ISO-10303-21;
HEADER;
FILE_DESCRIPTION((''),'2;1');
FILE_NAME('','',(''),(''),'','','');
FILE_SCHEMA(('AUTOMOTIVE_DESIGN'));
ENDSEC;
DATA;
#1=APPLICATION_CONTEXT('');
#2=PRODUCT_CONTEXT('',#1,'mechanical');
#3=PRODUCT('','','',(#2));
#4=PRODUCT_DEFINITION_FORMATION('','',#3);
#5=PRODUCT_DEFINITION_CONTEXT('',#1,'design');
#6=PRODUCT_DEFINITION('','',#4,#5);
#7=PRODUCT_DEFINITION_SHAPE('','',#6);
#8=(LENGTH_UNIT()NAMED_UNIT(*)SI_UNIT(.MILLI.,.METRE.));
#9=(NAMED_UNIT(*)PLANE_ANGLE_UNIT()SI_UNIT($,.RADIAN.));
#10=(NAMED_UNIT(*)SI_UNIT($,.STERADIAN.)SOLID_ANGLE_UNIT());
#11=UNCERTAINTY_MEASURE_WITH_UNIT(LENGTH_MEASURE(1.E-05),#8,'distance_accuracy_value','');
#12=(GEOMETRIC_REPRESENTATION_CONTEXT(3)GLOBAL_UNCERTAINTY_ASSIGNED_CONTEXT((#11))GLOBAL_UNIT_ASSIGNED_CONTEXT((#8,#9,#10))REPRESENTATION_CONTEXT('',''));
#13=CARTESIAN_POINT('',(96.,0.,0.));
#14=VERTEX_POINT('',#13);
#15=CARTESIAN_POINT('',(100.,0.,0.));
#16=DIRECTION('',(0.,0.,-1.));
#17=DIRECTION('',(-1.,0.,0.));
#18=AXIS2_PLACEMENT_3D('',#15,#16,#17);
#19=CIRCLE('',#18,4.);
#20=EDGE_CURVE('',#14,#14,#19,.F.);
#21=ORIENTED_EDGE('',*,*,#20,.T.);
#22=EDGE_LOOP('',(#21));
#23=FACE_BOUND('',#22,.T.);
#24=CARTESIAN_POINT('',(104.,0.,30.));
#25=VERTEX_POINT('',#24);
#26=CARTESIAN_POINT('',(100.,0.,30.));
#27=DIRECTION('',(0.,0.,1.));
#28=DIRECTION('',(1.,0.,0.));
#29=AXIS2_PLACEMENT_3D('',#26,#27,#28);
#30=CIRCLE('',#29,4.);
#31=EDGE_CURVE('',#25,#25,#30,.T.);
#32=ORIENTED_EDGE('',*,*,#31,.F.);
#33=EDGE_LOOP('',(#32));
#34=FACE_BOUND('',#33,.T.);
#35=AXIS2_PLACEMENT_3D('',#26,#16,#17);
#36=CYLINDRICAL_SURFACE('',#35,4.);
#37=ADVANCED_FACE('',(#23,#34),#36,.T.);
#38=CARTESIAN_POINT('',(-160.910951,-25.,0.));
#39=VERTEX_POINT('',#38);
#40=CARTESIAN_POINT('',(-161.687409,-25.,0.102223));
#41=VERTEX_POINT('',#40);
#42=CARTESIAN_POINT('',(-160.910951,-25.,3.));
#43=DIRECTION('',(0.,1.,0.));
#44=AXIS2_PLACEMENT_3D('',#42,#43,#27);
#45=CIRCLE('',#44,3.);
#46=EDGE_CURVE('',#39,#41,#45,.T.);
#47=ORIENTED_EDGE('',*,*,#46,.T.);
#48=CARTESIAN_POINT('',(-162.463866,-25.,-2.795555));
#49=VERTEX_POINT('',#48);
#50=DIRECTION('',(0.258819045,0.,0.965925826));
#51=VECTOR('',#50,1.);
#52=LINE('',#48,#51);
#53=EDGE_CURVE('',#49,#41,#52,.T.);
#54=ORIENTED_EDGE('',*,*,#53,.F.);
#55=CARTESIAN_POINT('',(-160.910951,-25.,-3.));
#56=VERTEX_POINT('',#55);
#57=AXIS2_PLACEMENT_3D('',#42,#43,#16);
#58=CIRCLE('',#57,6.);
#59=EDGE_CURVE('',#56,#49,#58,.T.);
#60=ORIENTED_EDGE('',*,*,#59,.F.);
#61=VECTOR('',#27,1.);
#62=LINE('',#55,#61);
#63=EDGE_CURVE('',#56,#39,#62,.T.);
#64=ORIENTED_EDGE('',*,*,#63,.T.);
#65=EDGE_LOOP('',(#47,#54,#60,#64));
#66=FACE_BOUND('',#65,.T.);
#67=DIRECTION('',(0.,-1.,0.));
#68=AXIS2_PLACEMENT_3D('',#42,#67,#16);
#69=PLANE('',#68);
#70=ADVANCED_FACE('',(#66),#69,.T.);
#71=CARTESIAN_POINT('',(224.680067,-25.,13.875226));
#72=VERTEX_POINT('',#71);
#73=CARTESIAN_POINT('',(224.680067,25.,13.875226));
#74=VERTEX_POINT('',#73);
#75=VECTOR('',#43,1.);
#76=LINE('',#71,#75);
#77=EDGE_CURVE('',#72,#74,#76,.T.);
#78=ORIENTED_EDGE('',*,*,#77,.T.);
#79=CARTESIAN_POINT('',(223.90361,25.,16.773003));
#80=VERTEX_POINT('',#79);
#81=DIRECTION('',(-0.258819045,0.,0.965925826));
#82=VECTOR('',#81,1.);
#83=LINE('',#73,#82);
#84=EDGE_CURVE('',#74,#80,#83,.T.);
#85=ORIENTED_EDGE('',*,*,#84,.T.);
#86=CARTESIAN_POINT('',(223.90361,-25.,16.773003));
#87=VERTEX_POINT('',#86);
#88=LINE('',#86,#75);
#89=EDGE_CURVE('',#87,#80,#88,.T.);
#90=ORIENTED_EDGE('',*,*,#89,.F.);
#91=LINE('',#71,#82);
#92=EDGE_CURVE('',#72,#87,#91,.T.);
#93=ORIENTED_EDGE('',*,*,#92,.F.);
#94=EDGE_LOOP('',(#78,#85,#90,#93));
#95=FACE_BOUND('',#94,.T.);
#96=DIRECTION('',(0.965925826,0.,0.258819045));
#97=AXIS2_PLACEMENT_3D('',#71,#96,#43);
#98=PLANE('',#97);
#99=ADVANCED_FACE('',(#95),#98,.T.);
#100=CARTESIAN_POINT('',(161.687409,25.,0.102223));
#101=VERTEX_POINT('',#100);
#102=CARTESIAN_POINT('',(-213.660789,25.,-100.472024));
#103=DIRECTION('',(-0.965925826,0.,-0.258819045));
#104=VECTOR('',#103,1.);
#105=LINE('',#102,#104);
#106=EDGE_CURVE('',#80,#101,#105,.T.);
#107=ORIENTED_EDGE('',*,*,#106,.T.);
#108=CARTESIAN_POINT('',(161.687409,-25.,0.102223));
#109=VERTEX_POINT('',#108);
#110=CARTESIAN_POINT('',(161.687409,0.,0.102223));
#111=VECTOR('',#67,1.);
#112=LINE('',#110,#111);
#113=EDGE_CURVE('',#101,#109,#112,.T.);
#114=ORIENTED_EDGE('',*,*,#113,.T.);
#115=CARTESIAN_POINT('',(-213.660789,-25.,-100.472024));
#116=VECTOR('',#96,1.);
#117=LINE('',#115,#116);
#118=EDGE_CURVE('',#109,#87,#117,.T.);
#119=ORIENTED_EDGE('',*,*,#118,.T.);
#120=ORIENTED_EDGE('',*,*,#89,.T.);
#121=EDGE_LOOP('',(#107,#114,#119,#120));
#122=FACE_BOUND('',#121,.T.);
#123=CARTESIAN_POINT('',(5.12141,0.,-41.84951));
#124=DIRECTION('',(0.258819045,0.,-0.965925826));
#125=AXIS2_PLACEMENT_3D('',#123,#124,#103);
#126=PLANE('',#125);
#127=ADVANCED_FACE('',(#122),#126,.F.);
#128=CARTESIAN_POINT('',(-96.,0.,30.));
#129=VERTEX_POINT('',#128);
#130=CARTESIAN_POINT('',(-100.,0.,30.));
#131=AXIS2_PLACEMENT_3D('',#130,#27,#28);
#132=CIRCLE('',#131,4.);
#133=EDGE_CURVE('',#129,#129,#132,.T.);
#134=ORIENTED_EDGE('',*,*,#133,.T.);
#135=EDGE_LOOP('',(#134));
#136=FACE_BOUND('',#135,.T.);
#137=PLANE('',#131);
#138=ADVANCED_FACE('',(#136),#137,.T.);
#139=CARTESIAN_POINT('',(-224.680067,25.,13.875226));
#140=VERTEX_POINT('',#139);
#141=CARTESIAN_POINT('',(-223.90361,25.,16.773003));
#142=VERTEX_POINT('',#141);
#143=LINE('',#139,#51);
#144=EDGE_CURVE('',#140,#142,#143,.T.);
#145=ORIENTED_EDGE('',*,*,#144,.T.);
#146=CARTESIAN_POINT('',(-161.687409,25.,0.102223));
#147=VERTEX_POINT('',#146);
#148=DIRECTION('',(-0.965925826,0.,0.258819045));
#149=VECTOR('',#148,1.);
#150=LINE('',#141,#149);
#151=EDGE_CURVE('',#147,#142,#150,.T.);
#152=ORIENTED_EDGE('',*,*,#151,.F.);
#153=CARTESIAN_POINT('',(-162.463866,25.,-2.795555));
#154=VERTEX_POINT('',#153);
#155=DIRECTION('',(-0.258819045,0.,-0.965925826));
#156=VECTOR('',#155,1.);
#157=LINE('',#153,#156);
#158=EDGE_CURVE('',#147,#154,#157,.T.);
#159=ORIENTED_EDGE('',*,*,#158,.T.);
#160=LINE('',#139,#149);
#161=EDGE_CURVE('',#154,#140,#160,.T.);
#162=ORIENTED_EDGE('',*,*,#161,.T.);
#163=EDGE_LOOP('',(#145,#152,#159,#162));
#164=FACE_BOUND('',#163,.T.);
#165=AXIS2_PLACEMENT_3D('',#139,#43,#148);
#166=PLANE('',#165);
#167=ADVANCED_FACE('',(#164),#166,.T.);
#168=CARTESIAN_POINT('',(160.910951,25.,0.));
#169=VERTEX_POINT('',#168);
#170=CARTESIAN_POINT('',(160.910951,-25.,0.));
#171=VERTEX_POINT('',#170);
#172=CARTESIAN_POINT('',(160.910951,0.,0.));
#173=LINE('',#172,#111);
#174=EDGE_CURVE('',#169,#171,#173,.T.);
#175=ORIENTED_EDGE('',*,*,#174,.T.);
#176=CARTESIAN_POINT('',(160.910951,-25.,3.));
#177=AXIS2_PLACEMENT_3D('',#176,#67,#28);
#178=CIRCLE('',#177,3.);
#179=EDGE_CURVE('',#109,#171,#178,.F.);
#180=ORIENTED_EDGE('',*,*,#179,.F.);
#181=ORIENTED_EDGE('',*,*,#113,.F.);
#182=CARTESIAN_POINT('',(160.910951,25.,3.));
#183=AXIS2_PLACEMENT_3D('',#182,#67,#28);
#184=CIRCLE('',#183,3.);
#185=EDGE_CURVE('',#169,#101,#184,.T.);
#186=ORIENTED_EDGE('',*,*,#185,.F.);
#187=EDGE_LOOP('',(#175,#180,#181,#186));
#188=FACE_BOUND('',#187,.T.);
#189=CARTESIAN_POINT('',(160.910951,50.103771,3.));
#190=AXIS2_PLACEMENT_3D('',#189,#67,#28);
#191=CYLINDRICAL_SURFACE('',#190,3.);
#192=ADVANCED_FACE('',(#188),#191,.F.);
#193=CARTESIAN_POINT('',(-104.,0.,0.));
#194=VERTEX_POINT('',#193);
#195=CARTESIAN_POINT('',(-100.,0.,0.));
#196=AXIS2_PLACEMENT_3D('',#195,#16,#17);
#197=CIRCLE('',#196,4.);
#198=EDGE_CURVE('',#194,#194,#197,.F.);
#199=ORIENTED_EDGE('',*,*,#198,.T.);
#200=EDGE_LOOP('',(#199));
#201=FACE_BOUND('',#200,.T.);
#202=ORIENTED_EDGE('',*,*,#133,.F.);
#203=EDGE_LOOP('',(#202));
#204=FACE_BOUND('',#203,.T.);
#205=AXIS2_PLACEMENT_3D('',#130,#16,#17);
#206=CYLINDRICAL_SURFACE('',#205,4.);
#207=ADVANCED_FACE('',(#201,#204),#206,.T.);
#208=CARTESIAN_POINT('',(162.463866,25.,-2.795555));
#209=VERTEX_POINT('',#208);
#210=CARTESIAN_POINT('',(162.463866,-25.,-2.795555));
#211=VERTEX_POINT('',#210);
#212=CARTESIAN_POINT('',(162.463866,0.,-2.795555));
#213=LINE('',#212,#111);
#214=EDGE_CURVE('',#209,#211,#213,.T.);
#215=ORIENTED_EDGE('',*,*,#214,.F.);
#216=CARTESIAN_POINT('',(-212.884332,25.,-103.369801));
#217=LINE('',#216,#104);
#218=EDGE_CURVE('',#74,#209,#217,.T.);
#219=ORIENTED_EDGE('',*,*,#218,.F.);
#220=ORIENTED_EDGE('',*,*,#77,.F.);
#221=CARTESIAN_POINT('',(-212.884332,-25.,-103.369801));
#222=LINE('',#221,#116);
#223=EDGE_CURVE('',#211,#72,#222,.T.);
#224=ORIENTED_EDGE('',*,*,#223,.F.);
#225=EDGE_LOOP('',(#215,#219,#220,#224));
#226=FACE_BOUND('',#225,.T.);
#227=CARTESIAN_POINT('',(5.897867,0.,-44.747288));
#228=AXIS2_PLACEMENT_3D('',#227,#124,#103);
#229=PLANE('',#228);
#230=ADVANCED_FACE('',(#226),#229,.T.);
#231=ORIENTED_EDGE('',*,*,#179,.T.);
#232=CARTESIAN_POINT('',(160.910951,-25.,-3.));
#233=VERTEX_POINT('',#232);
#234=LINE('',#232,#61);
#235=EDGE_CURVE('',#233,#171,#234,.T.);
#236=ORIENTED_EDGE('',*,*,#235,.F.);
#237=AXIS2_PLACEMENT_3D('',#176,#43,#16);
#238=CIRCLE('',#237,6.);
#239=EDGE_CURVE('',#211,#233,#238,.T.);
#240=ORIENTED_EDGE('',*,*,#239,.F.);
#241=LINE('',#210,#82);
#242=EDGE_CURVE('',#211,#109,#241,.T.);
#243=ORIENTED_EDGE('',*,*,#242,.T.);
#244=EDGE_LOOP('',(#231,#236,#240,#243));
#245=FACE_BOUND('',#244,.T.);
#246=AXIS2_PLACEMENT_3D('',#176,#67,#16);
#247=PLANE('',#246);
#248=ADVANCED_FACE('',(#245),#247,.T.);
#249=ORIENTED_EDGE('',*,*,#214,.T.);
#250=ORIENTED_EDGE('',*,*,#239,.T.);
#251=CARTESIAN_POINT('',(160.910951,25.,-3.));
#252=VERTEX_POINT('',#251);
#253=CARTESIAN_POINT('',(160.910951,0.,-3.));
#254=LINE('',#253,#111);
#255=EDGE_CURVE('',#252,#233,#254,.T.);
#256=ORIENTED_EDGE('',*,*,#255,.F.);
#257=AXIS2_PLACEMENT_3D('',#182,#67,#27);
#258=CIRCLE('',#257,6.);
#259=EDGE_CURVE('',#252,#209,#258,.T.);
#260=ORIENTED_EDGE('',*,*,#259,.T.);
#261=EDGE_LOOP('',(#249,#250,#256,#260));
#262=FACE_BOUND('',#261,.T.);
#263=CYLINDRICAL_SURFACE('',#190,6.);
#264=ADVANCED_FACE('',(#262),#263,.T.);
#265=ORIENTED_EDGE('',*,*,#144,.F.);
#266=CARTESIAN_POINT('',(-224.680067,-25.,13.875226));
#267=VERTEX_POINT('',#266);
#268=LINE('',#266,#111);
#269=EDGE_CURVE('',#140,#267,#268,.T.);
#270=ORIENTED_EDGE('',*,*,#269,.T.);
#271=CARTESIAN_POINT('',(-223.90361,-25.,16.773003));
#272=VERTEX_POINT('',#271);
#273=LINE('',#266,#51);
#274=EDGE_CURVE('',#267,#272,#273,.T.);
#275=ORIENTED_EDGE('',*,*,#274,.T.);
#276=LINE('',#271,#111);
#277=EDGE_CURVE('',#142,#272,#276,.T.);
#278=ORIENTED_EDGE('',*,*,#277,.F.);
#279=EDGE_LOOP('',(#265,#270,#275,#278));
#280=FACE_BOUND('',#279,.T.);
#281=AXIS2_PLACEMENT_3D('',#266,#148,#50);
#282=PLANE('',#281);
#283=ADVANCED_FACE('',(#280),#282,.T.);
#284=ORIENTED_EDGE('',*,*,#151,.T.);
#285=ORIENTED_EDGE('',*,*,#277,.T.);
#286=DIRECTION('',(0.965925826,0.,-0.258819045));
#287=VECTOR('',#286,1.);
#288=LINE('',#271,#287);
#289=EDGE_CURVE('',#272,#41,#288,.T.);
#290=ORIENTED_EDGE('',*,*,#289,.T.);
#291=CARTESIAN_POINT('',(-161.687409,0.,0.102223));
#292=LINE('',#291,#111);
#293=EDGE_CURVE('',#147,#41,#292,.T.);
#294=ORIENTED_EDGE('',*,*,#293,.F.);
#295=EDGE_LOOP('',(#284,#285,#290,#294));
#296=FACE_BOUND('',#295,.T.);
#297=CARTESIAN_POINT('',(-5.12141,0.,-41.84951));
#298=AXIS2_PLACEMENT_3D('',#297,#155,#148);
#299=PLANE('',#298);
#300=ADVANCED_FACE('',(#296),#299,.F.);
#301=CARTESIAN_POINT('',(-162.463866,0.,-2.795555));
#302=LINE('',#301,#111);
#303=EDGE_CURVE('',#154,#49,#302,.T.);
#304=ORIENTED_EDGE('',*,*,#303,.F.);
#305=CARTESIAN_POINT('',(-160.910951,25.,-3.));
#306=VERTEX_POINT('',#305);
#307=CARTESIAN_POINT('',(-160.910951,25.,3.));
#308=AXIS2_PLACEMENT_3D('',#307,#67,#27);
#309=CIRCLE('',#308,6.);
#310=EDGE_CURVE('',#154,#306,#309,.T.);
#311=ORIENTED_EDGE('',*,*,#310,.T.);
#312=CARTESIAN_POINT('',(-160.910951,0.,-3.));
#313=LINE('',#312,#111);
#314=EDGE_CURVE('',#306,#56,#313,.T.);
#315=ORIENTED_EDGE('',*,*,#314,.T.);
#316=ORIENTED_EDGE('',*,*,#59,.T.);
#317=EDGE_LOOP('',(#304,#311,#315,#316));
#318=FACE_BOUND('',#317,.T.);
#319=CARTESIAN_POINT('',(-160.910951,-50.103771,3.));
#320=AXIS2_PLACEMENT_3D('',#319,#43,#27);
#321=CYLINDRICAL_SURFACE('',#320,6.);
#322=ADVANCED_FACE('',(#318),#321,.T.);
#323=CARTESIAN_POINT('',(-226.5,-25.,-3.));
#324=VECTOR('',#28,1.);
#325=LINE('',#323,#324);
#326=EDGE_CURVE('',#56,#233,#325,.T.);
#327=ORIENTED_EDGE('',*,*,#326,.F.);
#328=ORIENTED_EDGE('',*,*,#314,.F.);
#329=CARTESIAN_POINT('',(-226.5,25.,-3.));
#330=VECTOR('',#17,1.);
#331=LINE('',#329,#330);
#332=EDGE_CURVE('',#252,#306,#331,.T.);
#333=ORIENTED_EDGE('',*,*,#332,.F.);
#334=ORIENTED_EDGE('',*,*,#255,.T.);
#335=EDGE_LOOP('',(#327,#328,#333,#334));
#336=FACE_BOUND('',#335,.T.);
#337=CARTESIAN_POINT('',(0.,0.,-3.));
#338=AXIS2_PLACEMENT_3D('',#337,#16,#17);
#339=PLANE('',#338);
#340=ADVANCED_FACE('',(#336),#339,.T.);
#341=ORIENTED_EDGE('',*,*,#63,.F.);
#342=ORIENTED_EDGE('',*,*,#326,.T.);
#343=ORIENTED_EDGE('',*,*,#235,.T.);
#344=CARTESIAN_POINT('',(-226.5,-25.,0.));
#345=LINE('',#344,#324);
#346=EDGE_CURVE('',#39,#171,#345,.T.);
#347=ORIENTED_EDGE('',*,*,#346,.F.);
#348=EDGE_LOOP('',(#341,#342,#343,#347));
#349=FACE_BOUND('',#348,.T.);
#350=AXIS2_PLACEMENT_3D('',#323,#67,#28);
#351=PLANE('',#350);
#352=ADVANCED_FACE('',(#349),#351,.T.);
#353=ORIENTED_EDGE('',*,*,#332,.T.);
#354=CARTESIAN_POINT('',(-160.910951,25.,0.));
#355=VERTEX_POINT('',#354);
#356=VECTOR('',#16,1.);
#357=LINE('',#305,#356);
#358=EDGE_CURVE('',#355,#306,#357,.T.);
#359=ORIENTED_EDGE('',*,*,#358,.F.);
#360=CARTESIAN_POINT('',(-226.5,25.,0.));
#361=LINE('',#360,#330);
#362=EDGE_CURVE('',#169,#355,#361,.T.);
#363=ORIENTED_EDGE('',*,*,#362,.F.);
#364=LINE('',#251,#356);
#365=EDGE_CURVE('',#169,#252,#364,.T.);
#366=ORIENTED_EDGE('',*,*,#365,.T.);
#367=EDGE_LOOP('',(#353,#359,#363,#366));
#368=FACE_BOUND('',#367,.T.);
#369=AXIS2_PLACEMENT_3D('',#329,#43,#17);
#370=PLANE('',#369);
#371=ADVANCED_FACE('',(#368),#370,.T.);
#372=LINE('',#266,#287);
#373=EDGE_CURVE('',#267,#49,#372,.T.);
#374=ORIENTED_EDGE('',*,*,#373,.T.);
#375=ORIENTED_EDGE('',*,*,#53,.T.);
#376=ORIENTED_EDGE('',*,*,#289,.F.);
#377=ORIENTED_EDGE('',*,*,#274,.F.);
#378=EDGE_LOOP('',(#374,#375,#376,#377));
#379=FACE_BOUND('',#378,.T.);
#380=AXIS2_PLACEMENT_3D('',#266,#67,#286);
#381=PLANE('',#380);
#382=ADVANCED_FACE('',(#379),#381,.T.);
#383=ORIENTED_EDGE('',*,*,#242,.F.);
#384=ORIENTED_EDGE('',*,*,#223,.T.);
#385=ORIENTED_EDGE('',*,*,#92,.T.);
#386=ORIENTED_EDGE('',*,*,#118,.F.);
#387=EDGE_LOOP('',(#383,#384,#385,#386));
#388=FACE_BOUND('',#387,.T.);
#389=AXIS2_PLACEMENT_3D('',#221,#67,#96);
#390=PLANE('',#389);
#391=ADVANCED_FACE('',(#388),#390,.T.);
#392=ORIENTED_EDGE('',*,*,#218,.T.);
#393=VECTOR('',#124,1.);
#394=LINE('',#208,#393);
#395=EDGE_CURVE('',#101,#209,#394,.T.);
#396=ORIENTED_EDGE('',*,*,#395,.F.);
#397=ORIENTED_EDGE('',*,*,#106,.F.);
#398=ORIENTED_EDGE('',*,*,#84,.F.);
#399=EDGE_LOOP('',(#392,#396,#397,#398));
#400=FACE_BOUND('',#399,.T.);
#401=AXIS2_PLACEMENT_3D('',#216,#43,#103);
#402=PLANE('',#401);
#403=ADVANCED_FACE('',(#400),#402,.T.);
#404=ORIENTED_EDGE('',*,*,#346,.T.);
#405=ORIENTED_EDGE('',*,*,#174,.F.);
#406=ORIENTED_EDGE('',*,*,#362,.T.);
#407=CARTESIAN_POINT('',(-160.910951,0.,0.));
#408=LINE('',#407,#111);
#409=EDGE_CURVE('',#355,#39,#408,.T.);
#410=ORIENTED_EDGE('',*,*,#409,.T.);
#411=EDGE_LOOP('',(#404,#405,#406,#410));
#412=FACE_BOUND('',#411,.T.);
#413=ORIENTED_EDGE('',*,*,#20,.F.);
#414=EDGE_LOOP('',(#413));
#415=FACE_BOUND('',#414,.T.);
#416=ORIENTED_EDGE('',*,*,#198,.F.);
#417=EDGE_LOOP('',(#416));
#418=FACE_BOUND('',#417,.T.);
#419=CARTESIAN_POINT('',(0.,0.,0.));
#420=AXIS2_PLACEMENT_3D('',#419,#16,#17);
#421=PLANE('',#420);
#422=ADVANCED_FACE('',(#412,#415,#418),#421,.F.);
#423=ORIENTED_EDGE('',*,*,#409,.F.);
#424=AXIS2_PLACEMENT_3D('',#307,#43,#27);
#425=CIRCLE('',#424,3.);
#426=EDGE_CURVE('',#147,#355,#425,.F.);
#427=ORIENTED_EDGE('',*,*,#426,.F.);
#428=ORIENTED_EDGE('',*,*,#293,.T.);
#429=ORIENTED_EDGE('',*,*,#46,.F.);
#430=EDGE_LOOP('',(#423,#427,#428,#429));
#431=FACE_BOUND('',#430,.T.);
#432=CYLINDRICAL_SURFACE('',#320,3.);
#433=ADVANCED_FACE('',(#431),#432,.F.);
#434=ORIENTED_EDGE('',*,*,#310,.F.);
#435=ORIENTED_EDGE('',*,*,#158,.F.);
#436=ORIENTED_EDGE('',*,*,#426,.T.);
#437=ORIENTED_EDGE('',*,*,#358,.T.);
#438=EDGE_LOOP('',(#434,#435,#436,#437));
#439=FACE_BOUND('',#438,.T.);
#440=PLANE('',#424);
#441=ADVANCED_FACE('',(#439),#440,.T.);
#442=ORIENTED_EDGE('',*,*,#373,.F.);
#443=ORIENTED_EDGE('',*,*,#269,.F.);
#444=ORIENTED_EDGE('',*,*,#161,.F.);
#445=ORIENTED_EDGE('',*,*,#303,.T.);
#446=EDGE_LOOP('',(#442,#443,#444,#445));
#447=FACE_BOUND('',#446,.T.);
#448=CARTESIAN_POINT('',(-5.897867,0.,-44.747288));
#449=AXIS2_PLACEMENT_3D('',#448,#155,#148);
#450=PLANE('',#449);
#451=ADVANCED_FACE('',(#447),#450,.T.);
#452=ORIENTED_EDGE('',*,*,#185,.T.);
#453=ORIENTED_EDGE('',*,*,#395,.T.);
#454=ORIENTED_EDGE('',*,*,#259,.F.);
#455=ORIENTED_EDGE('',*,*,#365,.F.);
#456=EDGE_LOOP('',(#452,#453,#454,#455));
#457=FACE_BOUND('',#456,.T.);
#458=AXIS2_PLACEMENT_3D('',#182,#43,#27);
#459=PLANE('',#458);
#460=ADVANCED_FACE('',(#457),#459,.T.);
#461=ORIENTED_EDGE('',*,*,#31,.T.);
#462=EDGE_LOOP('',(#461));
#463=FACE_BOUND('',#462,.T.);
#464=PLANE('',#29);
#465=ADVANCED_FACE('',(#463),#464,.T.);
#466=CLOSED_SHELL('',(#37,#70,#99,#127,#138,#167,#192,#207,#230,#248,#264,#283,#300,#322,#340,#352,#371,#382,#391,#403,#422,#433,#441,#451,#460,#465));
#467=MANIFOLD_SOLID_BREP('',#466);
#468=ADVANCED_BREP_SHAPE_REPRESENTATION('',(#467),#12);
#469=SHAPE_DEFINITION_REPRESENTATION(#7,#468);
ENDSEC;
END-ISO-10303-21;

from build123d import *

# Parameters (mm, degrees)
SKETCH1_W              = 453
SKETCH1_H              = 50
BASE_FLANGE1_DEPTH     = 3
SKETCHED_START         = -25
SKETCHED_BEND1_DEPTH   = 50
SKETCHED_BEND1_2_DEPTH = 50
SKETCH7_R              = 4
BOSS_EXTRUDE1_DEPTH    = 30


# Read off the part's stored shape, not the designer's step: Sketched Bend1
# Sheet-metal steps are written as plain solids
with BuildPart() as part:
    # Sketch1 → Base-Flange1 (new body)
    with BuildSketch(Plane.XY):
        Rectangle(SKETCH1_W, SKETCH1_H)
    extrude(amount=-BASE_FLANGE1_DEPTH)

    # Sketched Bend1 outline → Sketched Bend1 (cut)
    with BuildSketch(Plane(origin=(0, 0, 0), x_dir=(1, 0, 0), z_dir=(0, 1, 0)).offset(SKETCHED_START)):
        with BuildLine():
            ThreePointArc((-162.463865648, 2.795554958), (-161.69410853, 2.948669168), (-160.910951377, 3))
            Line((-160.910951377, 3), (-226.5, 3))
            Line((-226.5, 3), (-226.5, 0))
            Line((-226.5, 0), (-172.897018786, 0))
            Line((-172.897018786, 0), (-162.463865648, 2.795554958))
        make_face()
        with BuildLine():
            Line((226.5, 3), (160.910951377, 3))
            ThreePointArc((160.910951377, 3), (161.69410853, 2.948669168), (162.463865648, 2.795554958))
            Line((162.463865648, 2.795554958), (172.897018786, 0))
            Line((172.897018786, 0), (226.5, 0))
            Line((226.5, 0), (226.5, 3))
        make_face()
    extrude(amount=SKETCHED_BEND1_DEPTH, mode=Mode.SUBTRACT)

    # Sketched Bend1 2 outline → Sketched Bend1 2 (add)
    with BuildSketch(Plane(origin=(0, 0, 0), x_dir=(1, 0, 0), z_dir=(0, 1, 0)).offset(SKETCHED_START)):
        with BuildLine():
            Line((-160.910951377, 0), (-172.897018786, 0))
            Line((-172.897018786, 0), (-224.680067079, -13.875225972))
            Line((-224.680067079, -13.875225972), (-223.903609944, -16.773003451))
            Line((-223.903609944, -16.773003451), (-161.687408513, -0.102222521))
            ThreePointArc((-161.687408513, -0.102222521), (-161.302529954, -0.025665416), (-160.910951377, 0))
        make_face()
        with BuildLine():
            Line((224.680067079, -13.875225972), (172.897018786, 0))
            Line((172.897018786, 0), (160.910951377, 0))
            ThreePointArc((160.910951377, 0), (161.302529954, -0.025665416), (161.687408513, -0.102222521))
            Line((161.687408513, -0.102222521), (223.903609944, -16.773003451))
            Line((223.903609944, -16.773003451), (224.680067079, -13.875225972))
        make_face()
    extrude(amount=SKETCHED_BEND1_2_DEPTH)

    # Sketch7 → Boss-Extrude1 (add)
    with BuildSketch(Plane.XY):
        with Locations(Location((-100, 0, 0), (0, 0, 180))):
            Circle(SKETCH7_R)
        with Locations(Location((100, 0, 0), (0, 0, 180))):
            Circle(SKETCH7_R)
    extrude(amount=BOSS_EXTRUDE1_DEPTH)


solid = part.part
